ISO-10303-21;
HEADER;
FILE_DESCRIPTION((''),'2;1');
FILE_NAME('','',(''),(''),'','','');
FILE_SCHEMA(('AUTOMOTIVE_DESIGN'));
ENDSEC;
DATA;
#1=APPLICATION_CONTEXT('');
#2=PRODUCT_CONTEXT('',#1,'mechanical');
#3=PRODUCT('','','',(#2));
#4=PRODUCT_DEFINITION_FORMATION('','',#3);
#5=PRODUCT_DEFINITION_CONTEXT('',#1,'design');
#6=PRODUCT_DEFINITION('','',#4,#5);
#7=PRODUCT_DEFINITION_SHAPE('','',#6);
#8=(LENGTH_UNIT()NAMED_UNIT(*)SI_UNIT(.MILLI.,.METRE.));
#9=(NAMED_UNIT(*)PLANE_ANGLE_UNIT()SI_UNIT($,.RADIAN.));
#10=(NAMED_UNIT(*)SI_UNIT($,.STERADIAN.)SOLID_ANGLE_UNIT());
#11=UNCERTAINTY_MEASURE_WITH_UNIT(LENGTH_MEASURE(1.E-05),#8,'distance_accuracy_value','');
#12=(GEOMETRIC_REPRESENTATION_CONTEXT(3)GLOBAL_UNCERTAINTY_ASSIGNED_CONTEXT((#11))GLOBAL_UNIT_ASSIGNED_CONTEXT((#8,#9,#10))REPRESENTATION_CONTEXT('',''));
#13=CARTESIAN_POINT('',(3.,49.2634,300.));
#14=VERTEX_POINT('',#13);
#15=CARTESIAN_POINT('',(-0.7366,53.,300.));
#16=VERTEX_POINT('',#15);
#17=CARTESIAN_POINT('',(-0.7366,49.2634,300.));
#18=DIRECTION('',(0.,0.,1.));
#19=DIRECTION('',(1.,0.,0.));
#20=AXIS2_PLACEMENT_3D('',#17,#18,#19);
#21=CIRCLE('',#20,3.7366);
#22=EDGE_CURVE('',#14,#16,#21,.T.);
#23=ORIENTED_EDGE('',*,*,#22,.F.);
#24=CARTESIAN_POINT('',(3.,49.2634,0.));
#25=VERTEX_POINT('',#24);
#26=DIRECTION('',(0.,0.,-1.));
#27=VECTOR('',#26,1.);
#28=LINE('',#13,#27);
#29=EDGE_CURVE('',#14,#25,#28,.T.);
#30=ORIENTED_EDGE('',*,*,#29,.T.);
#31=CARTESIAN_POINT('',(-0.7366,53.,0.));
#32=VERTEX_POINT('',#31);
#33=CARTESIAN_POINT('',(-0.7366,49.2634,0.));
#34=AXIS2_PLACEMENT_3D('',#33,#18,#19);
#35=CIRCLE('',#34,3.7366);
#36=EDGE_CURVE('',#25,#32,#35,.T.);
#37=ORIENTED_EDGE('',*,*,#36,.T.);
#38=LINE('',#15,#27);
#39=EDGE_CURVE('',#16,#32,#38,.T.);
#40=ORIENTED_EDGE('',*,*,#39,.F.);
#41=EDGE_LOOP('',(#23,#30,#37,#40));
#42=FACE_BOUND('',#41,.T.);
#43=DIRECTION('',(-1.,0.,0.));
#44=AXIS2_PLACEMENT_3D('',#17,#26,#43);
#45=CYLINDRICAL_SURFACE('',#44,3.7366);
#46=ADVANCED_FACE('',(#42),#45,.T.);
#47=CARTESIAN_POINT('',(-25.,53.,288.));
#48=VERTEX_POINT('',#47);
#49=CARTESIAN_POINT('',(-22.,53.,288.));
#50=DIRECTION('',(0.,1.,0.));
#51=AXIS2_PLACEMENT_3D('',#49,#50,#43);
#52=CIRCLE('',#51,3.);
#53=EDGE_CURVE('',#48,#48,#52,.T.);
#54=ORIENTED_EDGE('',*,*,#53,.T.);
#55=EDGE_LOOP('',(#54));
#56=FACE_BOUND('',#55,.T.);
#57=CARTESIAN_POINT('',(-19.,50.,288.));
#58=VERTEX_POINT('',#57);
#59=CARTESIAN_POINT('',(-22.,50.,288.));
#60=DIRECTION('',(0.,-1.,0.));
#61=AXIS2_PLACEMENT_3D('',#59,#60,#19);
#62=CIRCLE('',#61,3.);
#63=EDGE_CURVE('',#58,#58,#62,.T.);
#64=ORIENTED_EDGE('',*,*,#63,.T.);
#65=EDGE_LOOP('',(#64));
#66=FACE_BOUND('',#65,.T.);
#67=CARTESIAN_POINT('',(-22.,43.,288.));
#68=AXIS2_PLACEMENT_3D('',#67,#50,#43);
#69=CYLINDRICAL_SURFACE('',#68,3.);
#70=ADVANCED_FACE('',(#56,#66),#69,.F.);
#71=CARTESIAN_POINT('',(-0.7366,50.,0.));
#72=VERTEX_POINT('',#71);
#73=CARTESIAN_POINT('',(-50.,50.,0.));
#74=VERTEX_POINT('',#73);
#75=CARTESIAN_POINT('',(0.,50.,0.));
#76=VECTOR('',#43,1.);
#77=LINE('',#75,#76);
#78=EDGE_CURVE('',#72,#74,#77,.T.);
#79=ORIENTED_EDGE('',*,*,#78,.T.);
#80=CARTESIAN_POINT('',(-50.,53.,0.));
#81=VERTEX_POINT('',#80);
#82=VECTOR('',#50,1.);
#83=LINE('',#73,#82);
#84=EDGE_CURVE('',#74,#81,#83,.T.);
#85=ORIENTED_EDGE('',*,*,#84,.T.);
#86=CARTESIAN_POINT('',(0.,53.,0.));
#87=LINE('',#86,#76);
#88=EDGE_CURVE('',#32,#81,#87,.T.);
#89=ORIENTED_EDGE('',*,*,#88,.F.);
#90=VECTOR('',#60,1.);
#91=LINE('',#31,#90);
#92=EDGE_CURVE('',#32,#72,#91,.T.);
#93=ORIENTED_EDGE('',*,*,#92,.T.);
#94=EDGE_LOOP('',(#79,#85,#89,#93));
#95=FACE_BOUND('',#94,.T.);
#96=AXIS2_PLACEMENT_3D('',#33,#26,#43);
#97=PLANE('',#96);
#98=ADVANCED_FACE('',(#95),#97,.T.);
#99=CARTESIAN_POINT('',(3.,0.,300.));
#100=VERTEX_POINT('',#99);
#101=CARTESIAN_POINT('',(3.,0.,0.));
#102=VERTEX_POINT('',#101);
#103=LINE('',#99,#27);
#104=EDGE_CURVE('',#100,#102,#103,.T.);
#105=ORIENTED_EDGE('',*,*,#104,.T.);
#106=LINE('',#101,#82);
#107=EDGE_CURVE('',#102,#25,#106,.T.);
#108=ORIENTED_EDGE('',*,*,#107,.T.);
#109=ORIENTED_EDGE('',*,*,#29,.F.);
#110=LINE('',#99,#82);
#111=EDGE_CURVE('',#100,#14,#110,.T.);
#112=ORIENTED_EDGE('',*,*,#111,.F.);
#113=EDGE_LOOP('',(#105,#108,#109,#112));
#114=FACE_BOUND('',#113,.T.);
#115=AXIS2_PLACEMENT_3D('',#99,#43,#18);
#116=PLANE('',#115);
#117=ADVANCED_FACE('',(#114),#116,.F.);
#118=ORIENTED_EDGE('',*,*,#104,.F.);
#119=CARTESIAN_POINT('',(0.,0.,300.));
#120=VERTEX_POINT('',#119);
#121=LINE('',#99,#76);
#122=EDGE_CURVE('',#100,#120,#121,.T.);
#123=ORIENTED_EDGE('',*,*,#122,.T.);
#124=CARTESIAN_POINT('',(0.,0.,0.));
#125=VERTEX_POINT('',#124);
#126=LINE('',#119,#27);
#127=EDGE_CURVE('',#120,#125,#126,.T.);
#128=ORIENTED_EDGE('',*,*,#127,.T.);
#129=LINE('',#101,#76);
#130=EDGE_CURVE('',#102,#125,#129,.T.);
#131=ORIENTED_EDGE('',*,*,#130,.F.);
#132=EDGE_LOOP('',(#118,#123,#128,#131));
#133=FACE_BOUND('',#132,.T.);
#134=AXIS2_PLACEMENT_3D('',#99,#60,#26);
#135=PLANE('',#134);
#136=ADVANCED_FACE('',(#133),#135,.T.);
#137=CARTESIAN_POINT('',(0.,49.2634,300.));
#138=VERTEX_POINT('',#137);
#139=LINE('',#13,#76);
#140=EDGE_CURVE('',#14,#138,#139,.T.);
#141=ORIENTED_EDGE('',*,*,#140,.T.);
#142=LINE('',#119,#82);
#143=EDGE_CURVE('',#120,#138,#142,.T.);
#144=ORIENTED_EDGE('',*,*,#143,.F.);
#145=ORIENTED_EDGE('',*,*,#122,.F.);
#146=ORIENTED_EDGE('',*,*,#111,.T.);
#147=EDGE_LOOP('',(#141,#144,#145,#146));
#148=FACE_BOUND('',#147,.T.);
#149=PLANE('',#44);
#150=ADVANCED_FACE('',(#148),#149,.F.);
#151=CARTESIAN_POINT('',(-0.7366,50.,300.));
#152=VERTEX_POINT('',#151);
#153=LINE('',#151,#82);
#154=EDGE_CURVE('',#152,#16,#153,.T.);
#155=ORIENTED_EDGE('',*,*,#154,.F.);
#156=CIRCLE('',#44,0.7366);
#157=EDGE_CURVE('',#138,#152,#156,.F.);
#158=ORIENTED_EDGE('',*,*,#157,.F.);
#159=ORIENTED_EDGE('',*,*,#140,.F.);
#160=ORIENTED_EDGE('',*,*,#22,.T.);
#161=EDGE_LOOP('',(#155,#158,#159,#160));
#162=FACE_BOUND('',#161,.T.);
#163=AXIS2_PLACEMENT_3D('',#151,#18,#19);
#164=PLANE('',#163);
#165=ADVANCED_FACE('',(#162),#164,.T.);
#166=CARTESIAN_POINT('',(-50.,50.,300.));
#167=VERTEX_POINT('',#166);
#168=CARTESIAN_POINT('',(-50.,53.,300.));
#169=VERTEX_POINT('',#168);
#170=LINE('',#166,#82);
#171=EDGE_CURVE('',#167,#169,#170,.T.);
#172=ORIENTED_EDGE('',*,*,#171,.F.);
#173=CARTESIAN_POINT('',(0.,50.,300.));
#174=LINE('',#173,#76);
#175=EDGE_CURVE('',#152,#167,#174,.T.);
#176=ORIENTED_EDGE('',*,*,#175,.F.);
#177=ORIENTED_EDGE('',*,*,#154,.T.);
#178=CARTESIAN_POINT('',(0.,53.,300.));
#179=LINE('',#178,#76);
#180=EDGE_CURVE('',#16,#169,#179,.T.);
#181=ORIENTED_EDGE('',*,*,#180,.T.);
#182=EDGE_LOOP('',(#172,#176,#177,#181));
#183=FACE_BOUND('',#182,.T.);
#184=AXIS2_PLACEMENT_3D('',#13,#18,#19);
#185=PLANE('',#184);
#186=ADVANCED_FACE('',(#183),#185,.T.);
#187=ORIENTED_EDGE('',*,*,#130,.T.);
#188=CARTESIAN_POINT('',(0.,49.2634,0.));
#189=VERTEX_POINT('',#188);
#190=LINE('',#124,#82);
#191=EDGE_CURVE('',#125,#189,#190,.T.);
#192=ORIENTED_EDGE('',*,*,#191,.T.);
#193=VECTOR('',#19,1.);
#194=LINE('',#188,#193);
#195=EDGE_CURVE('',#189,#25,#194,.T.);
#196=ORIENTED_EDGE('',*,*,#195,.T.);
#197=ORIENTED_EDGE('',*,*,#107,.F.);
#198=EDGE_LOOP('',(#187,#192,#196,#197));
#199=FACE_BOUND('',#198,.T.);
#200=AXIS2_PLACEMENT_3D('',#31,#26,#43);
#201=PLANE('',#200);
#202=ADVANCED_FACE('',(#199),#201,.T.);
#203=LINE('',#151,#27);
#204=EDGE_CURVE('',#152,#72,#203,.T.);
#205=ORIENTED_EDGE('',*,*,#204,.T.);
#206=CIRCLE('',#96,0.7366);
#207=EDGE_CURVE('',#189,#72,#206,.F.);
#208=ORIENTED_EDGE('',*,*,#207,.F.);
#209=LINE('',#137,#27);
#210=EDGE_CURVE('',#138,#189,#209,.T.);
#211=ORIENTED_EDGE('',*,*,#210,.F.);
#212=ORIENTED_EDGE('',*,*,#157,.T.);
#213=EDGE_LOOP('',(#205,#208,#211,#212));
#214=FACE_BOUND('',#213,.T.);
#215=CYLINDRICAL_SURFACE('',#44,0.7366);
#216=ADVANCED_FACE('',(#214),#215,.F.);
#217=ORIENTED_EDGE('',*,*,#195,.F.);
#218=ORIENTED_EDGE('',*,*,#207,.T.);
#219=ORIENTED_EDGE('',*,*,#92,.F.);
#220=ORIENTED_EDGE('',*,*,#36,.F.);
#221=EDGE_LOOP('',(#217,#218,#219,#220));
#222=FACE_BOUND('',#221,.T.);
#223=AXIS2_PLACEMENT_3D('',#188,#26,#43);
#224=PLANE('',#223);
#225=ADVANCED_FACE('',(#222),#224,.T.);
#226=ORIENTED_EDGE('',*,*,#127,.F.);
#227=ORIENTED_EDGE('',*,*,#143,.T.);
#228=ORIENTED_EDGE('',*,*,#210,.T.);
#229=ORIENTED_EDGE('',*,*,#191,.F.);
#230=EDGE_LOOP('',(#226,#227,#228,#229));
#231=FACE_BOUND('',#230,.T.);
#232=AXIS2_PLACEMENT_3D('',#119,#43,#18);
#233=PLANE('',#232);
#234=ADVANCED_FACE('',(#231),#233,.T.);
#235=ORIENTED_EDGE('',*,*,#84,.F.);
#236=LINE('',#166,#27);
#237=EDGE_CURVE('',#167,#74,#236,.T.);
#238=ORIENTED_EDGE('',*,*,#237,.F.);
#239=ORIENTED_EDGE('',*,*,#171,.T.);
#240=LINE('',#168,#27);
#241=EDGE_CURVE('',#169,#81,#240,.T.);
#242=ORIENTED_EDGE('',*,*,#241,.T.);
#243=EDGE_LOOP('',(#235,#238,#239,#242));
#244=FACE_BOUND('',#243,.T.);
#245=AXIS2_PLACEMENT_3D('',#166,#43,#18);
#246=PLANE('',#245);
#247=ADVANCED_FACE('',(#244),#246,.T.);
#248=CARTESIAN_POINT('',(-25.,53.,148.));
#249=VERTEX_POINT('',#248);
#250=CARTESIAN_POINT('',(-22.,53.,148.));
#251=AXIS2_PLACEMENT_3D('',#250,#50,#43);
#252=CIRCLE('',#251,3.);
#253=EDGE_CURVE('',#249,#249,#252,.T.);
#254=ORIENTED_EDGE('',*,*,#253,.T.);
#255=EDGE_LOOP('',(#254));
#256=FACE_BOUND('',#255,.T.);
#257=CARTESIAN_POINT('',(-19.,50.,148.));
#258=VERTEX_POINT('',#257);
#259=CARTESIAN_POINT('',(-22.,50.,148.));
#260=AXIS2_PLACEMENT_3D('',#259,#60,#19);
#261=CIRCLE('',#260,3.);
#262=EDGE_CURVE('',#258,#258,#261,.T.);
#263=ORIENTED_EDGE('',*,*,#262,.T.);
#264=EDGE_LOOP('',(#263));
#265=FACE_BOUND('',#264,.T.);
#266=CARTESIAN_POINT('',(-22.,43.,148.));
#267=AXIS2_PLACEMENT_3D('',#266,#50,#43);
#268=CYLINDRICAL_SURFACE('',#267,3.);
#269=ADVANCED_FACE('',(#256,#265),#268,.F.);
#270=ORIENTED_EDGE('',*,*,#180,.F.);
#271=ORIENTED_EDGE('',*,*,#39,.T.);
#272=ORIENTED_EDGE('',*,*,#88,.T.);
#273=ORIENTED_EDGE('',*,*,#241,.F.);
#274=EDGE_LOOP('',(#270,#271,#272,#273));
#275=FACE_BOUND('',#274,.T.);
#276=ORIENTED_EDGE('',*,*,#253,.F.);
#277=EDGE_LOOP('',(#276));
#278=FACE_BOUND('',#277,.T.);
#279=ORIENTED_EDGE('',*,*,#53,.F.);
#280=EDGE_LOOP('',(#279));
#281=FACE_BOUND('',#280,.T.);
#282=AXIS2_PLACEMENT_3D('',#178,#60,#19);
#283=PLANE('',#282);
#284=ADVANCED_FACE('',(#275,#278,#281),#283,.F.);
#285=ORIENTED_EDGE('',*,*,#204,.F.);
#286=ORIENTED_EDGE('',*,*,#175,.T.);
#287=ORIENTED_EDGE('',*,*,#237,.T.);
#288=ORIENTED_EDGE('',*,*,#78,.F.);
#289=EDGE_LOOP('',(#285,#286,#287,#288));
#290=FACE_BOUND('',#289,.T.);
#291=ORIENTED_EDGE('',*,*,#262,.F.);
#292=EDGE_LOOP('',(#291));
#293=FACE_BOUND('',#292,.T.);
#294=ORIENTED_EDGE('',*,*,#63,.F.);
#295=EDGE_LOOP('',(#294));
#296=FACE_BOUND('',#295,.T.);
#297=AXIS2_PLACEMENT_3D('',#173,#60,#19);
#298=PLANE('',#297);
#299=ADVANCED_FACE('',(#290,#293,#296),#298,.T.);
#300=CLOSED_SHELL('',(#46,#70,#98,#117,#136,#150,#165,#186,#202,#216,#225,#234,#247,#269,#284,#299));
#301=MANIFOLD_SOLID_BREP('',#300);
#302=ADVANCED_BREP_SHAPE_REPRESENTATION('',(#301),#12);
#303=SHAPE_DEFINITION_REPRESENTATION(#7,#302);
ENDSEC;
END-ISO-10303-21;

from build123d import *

# Parameters (mm, degrees)
BASE_FLANGE1_DEPTH = 300
SKETCH6_R          = 3
CUT_EXTRUDE1_DEPTH = 10


# Sheet-metal steps are written as plain solids
with BuildPart() as part:
    # Sketch1 → Base-Flange1 (new body)
    with BuildSketch(Plane.XY):
        with BuildLine():
            Line((0, 0), (0, 49.2634))
            ThreePointArc((0, 49.2634), (-0.215745145, 49.784254855), (-0.7366, 50))
            Line((-0.7366, 50), (-50, 50))
            Line((-50, 50), (-50, 53))
            Line((-50, 53), (-0.7366, 53))
            ThreePointArc((-0.7366, 53), (1.905575199, 51.905575199), (3, 49.2634))
            Line((3, 49.2634), (3, 0))
            Line((3, 0), (0, 0))
        make_face()
    extrude(amount=BASE_FLANGE1_DEPTH)

    # Sketch6 → Cut-Extrude1 (cut)
    with BuildSketch(Plane(origin=(0, 53, 0), x_dir=(1, 0, 0), z_dir=(0, 1, 0))):
        with Locations(Location((-22, -288, 0), (0, 0, 180))):
            Circle(SKETCH6_R)
        with Locations(Location((-22, -148, 0), (0, 0, 180))):
            Circle(SKETCH6_R)
    extrude(amount=-CUT_EXTRUDE1_DEPTH, mode=Mode.SUBTRACT)


solid = part.part
